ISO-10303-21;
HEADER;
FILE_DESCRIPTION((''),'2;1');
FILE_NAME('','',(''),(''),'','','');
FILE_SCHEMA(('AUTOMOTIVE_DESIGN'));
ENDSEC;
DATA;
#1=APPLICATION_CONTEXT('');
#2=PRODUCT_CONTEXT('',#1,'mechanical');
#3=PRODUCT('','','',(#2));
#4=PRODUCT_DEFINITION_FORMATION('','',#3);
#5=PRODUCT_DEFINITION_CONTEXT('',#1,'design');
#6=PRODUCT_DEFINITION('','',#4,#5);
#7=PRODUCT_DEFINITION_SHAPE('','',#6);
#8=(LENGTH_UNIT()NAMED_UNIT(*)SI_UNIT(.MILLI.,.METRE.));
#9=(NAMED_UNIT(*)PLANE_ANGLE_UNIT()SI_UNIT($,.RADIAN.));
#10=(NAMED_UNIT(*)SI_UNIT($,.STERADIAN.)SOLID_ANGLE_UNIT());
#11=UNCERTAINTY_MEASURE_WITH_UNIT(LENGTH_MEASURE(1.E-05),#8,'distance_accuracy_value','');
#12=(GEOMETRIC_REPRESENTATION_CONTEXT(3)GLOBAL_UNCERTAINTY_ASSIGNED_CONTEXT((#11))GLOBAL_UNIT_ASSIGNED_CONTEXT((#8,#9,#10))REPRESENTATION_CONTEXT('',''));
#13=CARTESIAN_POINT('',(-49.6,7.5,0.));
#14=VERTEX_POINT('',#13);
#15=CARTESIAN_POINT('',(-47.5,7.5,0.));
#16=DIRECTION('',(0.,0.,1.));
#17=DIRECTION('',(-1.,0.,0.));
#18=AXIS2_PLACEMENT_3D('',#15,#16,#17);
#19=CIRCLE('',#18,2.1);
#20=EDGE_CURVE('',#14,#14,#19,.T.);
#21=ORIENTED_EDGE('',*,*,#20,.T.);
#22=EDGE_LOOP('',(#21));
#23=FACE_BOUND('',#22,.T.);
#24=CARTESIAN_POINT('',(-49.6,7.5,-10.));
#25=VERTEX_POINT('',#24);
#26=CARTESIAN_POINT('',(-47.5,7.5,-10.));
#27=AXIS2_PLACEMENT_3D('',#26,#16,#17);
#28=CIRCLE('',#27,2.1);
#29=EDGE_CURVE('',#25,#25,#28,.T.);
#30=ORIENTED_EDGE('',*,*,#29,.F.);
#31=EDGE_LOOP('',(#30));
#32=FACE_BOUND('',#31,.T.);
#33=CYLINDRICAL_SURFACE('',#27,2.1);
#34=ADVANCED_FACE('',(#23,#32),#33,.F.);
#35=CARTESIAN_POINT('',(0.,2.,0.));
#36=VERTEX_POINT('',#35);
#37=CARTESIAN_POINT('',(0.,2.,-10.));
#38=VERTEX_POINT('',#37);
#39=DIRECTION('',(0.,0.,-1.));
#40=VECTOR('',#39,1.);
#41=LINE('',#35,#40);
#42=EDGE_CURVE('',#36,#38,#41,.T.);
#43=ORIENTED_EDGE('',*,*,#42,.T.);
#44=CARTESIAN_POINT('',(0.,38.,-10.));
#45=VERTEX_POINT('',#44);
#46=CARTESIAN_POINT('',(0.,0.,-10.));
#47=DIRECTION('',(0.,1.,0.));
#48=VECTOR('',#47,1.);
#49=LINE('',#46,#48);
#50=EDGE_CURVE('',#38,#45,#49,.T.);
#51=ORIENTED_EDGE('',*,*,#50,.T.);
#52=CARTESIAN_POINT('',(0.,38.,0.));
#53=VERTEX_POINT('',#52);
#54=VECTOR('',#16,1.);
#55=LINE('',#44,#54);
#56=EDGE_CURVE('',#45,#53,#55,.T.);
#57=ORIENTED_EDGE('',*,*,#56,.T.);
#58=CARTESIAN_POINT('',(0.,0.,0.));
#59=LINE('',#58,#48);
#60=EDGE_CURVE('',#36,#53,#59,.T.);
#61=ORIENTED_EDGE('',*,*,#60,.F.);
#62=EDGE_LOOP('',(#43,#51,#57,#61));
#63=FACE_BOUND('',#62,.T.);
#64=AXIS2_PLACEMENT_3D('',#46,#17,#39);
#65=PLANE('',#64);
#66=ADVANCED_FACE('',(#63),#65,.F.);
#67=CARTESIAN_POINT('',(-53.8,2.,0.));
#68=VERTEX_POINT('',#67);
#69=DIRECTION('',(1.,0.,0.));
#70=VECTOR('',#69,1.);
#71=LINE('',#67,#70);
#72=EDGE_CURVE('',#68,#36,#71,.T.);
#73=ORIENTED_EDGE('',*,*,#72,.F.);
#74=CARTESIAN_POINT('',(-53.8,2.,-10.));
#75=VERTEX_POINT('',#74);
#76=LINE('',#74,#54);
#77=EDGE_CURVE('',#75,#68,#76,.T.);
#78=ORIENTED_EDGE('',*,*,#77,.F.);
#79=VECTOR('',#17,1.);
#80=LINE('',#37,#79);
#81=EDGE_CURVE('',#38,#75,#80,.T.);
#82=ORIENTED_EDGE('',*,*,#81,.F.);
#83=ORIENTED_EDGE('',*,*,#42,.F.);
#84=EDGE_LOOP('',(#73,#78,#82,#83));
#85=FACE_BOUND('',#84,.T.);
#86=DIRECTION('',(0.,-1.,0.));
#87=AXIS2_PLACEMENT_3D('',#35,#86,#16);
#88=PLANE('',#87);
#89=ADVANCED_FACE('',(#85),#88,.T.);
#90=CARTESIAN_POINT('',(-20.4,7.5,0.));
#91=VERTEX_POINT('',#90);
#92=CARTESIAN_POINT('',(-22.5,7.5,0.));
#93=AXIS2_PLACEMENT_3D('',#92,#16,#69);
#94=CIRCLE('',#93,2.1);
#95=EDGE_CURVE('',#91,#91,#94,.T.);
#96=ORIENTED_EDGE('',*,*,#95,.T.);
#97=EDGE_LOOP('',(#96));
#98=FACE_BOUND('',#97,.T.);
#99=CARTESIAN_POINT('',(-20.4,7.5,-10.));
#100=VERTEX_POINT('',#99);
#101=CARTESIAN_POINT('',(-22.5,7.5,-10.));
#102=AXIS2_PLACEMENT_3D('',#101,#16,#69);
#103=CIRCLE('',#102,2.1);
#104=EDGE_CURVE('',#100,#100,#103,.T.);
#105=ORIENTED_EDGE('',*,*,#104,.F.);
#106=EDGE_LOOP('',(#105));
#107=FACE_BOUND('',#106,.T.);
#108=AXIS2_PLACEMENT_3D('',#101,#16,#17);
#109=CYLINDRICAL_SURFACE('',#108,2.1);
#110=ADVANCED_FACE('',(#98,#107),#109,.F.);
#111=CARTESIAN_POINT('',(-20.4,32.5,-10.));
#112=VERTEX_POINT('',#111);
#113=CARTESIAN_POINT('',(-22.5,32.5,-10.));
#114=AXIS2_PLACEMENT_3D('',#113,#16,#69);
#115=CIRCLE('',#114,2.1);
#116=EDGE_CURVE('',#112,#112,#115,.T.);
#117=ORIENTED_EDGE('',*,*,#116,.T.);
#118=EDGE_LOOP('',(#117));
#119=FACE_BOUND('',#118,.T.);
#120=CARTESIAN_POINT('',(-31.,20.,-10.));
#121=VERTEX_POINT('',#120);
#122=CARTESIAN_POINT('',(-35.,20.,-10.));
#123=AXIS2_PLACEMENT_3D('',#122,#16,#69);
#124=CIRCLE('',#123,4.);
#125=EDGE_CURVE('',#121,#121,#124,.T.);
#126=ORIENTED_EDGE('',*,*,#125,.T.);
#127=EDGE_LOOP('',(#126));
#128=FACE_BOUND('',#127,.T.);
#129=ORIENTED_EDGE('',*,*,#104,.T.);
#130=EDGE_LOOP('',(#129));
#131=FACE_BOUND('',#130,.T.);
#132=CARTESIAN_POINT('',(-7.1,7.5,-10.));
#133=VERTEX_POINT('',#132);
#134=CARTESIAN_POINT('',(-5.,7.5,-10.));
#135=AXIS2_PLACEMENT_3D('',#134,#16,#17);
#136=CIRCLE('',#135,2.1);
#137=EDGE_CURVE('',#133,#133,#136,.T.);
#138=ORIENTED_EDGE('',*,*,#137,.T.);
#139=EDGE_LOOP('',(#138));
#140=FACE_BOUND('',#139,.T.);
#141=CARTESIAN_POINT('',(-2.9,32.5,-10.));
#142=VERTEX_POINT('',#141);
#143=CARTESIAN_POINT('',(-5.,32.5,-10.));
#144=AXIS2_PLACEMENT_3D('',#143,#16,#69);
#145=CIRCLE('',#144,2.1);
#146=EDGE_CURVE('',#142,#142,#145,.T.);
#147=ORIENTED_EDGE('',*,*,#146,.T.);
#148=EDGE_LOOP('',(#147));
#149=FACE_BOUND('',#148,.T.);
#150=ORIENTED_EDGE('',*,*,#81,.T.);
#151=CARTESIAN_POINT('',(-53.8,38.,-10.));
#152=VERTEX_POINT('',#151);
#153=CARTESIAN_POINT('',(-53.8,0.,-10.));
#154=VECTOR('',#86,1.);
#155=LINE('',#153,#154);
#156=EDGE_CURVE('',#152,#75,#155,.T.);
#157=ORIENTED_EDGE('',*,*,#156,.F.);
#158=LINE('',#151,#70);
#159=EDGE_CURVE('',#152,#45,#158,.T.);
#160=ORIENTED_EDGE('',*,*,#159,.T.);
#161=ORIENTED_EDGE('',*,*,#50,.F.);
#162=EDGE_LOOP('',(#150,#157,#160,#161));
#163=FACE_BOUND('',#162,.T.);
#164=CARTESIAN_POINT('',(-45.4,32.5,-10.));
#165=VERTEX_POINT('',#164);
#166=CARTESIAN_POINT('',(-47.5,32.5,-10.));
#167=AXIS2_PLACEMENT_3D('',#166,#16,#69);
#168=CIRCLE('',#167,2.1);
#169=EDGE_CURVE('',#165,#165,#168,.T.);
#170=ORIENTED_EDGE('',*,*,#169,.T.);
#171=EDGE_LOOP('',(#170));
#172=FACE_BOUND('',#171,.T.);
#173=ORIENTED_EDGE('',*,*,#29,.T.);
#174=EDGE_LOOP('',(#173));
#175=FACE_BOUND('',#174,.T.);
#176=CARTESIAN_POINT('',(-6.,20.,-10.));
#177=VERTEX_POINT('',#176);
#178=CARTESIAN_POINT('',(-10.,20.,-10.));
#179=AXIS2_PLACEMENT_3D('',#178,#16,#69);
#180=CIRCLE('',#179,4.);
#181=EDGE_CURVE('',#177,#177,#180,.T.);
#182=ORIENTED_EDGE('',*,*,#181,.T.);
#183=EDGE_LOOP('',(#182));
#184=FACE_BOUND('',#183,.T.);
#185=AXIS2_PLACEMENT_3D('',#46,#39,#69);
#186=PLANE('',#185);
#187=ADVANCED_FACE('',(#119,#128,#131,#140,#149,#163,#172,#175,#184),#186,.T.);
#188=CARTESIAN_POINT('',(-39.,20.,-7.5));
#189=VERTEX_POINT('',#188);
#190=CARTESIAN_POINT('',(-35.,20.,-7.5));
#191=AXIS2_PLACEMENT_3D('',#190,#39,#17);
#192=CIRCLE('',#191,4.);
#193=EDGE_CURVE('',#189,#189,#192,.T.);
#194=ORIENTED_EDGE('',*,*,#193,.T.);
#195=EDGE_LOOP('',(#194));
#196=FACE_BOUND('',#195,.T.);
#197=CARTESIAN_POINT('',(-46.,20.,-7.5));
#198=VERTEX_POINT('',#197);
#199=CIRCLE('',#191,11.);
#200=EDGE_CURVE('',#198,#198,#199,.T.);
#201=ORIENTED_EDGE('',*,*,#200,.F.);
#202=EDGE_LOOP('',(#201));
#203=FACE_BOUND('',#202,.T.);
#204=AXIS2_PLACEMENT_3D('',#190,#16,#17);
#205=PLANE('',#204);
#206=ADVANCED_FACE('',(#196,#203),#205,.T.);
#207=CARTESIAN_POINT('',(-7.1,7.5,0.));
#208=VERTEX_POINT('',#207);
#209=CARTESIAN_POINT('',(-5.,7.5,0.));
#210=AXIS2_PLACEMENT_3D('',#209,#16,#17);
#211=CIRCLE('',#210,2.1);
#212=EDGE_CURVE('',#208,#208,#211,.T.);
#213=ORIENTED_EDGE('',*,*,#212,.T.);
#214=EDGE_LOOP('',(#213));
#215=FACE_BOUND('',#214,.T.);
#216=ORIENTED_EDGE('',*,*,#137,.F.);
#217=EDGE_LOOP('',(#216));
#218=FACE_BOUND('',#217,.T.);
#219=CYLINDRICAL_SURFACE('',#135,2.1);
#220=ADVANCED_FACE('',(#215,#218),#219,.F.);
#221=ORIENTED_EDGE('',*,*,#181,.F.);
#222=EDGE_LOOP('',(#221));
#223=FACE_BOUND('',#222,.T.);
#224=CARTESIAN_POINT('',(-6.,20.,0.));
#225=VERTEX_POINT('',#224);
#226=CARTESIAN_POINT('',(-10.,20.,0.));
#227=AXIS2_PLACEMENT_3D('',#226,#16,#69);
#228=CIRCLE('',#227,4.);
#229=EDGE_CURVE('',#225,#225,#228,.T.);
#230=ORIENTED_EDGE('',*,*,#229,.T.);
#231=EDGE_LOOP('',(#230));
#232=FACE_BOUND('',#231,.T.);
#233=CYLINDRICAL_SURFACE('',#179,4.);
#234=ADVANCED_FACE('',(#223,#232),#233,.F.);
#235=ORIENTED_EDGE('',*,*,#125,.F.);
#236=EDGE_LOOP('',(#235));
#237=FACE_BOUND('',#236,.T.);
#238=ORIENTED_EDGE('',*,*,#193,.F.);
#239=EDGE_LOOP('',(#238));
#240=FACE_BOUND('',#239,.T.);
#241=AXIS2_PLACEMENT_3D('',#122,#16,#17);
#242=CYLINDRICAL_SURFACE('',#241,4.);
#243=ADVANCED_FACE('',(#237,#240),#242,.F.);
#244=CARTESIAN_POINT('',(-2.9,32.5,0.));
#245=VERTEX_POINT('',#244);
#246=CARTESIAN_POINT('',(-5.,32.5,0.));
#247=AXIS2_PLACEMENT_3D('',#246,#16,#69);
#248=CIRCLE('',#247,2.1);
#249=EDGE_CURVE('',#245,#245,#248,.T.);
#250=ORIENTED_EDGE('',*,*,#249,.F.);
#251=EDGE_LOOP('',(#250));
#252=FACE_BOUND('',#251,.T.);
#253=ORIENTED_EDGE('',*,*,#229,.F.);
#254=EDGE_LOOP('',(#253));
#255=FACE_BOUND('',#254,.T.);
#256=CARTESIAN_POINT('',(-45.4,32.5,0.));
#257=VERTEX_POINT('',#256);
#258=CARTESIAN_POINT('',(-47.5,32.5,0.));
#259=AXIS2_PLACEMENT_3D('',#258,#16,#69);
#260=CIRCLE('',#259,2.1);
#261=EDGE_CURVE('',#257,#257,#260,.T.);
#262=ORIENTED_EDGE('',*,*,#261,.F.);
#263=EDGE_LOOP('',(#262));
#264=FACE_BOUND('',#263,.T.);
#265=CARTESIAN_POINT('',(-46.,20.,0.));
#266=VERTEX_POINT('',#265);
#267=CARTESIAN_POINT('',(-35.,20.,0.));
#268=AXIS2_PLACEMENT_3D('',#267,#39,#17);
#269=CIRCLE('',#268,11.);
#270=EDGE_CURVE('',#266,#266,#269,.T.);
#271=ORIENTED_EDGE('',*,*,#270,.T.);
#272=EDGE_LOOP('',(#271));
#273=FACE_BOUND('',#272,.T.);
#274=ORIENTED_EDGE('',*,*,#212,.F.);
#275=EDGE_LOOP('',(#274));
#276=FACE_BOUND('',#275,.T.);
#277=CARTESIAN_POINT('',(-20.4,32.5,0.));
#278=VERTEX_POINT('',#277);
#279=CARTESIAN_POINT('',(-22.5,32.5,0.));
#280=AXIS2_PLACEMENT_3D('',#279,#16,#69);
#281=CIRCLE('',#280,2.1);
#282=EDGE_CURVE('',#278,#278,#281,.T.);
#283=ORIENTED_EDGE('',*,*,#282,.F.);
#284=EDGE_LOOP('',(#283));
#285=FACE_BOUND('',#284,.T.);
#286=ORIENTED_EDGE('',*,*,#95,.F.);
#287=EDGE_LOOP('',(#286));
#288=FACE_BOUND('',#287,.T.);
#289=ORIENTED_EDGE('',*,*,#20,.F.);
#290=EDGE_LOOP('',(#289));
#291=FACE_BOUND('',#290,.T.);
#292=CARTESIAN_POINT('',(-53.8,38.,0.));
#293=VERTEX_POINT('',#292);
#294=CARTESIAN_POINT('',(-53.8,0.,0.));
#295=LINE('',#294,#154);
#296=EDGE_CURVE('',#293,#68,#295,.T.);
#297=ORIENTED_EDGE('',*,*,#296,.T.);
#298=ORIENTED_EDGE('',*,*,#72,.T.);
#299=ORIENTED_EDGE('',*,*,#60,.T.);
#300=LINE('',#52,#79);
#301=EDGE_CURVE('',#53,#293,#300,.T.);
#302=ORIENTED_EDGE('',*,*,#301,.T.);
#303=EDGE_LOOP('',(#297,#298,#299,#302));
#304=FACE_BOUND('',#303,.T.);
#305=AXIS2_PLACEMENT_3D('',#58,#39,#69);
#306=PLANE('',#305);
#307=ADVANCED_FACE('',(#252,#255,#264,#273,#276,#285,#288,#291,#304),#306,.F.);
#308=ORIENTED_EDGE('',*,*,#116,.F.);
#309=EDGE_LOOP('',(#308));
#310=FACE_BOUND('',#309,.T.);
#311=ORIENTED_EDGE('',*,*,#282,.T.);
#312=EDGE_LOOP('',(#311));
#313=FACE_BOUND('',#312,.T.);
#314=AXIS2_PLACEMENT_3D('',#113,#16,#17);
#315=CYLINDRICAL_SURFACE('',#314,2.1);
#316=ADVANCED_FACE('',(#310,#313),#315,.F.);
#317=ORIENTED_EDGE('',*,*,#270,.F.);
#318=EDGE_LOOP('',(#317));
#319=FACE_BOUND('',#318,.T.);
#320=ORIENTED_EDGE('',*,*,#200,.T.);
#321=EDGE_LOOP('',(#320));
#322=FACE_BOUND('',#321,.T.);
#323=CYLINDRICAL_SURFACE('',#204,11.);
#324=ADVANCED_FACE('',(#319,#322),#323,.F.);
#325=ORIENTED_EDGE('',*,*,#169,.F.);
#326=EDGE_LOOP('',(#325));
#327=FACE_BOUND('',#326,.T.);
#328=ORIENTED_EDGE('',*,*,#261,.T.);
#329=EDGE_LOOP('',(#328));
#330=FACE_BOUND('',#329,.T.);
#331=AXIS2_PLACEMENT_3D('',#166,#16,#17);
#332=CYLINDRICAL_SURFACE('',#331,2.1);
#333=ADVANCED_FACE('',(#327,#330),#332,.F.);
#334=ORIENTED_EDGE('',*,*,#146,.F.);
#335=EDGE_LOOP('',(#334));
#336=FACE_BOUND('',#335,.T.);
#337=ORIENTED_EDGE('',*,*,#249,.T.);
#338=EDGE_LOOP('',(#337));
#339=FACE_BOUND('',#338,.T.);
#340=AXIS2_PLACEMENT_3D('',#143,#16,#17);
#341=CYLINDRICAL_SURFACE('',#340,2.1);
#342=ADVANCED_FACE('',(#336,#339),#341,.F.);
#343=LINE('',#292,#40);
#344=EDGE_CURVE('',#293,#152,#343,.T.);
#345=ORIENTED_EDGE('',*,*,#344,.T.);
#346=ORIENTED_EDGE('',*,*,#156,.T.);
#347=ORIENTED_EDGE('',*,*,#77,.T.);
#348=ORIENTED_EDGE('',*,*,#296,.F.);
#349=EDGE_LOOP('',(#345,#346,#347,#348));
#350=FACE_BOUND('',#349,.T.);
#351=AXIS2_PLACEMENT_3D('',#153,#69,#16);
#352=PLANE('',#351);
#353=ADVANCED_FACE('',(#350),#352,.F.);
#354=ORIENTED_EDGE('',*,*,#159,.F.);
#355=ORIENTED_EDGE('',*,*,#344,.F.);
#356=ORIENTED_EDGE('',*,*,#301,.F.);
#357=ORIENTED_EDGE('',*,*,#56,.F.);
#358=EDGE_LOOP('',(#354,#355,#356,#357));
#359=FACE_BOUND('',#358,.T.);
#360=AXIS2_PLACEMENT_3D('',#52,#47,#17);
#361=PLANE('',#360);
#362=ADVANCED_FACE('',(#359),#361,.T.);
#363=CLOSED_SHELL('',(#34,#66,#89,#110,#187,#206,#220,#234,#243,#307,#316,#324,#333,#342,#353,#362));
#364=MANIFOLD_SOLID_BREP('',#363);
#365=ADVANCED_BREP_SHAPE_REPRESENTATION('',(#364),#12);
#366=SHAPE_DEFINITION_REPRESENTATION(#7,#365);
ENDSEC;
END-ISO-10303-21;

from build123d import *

# Parameters (mm, degrees)
JOTYY_MIRRORED_START         = -10
JOTYY_MIRRORED_OUTLINE_W     = 53.8
JOTYY_MIRRORED_OUTLINE_H     = 36
JOTYY_MIRRORED_OUTLINE_R     = 2.1
JOTYY_MIRRORED_OUTLINE_R_2   = 11
JOTYY_MIRRORED_DEPTH         = 10
JOTYY_MIRRORED_2_OUTLINE_R   = 11
JOTYY_MIRRORED_2_OUTLINE_R_2 = 4
JOTYY_MIRRORED_2_DEPTH       = 2.5
SKETCH1_R                    = 4
CUT_EXTRUDE1_DEPTH           = 10


# Read off the part's stored shape, not the designer's step: jotyy_Mirrored
with BuildPart() as part:
    # jotyy_Mirrored outline → jotyy_Mirrored (new body)
    with BuildSketch(Plane.XY.offset(JOTYY_MIRRORED_START)):
        with Locations((-26.9, 20)):
            Rectangle(JOTYY_MIRRORED_OUTLINE_W, JOTYY_MIRRORED_OUTLINE_H)
        with Locations((-47.5, 7.5)):
            Circle(JOTYY_MIRRORED_OUTLINE_R, mode=Mode.SUBTRACT)
        with Locations((-22.5, 7.5)):
            Circle(JOTYY_MIRRORED_OUTLINE_R, mode=Mode.SUBTRACT)
        with Locations((-5, 7.5)):
            Circle(JOTYY_MIRRORED_OUTLINE_R, mode=Mode.SUBTRACT)
        with Locations((-35, 20)):
            Circle(JOTYY_MIRRORED_OUTLINE_R_2, mode=Mode.SUBTRACT)
        with Locations((-47.5, 32.5)):
            Circle(JOTYY_MIRRORED_OUTLINE_R, mode=Mode.SUBTRACT)
        with Locations((-22.5, 32.5)):
            Circle(JOTYY_MIRRORED_OUTLINE_R, mode=Mode.SUBTRACT)
        with Locations((-5, 32.5)):
            Circle(JOTYY_MIRRORED_OUTLINE_R, mode=Mode.SUBTRACT)
    extrude(amount=JOTYY_MIRRORED_DEPTH)

    # jotyy_Mirrored 2 outline → jotyy_Mirrored 2 (add)
    with BuildSketch(Plane.XY.offset(JOTYY_MIRRORED_START)):
        with Locations((-35, 20)):
            Circle(JOTYY_MIRRORED_2_OUTLINE_R)
        with Locations((-35, 20)):
            Circle(JOTYY_MIRRORED_2_OUTLINE_R_2, mode=Mode.SUBTRACT)
    extrude(amount=JOTYY_MIRRORED_2_DEPTH)

    # Sketch1 → Cut-Extrude1 (cut)
    with BuildSketch(Plane.XY):
        with Locations((-10, 20)):
            Circle(SKETCH1_R)
    extrude(amount=-CUT_EXTRUDE1_DEPTH, mode=Mode.SUBTRACT)


solid = part.part
